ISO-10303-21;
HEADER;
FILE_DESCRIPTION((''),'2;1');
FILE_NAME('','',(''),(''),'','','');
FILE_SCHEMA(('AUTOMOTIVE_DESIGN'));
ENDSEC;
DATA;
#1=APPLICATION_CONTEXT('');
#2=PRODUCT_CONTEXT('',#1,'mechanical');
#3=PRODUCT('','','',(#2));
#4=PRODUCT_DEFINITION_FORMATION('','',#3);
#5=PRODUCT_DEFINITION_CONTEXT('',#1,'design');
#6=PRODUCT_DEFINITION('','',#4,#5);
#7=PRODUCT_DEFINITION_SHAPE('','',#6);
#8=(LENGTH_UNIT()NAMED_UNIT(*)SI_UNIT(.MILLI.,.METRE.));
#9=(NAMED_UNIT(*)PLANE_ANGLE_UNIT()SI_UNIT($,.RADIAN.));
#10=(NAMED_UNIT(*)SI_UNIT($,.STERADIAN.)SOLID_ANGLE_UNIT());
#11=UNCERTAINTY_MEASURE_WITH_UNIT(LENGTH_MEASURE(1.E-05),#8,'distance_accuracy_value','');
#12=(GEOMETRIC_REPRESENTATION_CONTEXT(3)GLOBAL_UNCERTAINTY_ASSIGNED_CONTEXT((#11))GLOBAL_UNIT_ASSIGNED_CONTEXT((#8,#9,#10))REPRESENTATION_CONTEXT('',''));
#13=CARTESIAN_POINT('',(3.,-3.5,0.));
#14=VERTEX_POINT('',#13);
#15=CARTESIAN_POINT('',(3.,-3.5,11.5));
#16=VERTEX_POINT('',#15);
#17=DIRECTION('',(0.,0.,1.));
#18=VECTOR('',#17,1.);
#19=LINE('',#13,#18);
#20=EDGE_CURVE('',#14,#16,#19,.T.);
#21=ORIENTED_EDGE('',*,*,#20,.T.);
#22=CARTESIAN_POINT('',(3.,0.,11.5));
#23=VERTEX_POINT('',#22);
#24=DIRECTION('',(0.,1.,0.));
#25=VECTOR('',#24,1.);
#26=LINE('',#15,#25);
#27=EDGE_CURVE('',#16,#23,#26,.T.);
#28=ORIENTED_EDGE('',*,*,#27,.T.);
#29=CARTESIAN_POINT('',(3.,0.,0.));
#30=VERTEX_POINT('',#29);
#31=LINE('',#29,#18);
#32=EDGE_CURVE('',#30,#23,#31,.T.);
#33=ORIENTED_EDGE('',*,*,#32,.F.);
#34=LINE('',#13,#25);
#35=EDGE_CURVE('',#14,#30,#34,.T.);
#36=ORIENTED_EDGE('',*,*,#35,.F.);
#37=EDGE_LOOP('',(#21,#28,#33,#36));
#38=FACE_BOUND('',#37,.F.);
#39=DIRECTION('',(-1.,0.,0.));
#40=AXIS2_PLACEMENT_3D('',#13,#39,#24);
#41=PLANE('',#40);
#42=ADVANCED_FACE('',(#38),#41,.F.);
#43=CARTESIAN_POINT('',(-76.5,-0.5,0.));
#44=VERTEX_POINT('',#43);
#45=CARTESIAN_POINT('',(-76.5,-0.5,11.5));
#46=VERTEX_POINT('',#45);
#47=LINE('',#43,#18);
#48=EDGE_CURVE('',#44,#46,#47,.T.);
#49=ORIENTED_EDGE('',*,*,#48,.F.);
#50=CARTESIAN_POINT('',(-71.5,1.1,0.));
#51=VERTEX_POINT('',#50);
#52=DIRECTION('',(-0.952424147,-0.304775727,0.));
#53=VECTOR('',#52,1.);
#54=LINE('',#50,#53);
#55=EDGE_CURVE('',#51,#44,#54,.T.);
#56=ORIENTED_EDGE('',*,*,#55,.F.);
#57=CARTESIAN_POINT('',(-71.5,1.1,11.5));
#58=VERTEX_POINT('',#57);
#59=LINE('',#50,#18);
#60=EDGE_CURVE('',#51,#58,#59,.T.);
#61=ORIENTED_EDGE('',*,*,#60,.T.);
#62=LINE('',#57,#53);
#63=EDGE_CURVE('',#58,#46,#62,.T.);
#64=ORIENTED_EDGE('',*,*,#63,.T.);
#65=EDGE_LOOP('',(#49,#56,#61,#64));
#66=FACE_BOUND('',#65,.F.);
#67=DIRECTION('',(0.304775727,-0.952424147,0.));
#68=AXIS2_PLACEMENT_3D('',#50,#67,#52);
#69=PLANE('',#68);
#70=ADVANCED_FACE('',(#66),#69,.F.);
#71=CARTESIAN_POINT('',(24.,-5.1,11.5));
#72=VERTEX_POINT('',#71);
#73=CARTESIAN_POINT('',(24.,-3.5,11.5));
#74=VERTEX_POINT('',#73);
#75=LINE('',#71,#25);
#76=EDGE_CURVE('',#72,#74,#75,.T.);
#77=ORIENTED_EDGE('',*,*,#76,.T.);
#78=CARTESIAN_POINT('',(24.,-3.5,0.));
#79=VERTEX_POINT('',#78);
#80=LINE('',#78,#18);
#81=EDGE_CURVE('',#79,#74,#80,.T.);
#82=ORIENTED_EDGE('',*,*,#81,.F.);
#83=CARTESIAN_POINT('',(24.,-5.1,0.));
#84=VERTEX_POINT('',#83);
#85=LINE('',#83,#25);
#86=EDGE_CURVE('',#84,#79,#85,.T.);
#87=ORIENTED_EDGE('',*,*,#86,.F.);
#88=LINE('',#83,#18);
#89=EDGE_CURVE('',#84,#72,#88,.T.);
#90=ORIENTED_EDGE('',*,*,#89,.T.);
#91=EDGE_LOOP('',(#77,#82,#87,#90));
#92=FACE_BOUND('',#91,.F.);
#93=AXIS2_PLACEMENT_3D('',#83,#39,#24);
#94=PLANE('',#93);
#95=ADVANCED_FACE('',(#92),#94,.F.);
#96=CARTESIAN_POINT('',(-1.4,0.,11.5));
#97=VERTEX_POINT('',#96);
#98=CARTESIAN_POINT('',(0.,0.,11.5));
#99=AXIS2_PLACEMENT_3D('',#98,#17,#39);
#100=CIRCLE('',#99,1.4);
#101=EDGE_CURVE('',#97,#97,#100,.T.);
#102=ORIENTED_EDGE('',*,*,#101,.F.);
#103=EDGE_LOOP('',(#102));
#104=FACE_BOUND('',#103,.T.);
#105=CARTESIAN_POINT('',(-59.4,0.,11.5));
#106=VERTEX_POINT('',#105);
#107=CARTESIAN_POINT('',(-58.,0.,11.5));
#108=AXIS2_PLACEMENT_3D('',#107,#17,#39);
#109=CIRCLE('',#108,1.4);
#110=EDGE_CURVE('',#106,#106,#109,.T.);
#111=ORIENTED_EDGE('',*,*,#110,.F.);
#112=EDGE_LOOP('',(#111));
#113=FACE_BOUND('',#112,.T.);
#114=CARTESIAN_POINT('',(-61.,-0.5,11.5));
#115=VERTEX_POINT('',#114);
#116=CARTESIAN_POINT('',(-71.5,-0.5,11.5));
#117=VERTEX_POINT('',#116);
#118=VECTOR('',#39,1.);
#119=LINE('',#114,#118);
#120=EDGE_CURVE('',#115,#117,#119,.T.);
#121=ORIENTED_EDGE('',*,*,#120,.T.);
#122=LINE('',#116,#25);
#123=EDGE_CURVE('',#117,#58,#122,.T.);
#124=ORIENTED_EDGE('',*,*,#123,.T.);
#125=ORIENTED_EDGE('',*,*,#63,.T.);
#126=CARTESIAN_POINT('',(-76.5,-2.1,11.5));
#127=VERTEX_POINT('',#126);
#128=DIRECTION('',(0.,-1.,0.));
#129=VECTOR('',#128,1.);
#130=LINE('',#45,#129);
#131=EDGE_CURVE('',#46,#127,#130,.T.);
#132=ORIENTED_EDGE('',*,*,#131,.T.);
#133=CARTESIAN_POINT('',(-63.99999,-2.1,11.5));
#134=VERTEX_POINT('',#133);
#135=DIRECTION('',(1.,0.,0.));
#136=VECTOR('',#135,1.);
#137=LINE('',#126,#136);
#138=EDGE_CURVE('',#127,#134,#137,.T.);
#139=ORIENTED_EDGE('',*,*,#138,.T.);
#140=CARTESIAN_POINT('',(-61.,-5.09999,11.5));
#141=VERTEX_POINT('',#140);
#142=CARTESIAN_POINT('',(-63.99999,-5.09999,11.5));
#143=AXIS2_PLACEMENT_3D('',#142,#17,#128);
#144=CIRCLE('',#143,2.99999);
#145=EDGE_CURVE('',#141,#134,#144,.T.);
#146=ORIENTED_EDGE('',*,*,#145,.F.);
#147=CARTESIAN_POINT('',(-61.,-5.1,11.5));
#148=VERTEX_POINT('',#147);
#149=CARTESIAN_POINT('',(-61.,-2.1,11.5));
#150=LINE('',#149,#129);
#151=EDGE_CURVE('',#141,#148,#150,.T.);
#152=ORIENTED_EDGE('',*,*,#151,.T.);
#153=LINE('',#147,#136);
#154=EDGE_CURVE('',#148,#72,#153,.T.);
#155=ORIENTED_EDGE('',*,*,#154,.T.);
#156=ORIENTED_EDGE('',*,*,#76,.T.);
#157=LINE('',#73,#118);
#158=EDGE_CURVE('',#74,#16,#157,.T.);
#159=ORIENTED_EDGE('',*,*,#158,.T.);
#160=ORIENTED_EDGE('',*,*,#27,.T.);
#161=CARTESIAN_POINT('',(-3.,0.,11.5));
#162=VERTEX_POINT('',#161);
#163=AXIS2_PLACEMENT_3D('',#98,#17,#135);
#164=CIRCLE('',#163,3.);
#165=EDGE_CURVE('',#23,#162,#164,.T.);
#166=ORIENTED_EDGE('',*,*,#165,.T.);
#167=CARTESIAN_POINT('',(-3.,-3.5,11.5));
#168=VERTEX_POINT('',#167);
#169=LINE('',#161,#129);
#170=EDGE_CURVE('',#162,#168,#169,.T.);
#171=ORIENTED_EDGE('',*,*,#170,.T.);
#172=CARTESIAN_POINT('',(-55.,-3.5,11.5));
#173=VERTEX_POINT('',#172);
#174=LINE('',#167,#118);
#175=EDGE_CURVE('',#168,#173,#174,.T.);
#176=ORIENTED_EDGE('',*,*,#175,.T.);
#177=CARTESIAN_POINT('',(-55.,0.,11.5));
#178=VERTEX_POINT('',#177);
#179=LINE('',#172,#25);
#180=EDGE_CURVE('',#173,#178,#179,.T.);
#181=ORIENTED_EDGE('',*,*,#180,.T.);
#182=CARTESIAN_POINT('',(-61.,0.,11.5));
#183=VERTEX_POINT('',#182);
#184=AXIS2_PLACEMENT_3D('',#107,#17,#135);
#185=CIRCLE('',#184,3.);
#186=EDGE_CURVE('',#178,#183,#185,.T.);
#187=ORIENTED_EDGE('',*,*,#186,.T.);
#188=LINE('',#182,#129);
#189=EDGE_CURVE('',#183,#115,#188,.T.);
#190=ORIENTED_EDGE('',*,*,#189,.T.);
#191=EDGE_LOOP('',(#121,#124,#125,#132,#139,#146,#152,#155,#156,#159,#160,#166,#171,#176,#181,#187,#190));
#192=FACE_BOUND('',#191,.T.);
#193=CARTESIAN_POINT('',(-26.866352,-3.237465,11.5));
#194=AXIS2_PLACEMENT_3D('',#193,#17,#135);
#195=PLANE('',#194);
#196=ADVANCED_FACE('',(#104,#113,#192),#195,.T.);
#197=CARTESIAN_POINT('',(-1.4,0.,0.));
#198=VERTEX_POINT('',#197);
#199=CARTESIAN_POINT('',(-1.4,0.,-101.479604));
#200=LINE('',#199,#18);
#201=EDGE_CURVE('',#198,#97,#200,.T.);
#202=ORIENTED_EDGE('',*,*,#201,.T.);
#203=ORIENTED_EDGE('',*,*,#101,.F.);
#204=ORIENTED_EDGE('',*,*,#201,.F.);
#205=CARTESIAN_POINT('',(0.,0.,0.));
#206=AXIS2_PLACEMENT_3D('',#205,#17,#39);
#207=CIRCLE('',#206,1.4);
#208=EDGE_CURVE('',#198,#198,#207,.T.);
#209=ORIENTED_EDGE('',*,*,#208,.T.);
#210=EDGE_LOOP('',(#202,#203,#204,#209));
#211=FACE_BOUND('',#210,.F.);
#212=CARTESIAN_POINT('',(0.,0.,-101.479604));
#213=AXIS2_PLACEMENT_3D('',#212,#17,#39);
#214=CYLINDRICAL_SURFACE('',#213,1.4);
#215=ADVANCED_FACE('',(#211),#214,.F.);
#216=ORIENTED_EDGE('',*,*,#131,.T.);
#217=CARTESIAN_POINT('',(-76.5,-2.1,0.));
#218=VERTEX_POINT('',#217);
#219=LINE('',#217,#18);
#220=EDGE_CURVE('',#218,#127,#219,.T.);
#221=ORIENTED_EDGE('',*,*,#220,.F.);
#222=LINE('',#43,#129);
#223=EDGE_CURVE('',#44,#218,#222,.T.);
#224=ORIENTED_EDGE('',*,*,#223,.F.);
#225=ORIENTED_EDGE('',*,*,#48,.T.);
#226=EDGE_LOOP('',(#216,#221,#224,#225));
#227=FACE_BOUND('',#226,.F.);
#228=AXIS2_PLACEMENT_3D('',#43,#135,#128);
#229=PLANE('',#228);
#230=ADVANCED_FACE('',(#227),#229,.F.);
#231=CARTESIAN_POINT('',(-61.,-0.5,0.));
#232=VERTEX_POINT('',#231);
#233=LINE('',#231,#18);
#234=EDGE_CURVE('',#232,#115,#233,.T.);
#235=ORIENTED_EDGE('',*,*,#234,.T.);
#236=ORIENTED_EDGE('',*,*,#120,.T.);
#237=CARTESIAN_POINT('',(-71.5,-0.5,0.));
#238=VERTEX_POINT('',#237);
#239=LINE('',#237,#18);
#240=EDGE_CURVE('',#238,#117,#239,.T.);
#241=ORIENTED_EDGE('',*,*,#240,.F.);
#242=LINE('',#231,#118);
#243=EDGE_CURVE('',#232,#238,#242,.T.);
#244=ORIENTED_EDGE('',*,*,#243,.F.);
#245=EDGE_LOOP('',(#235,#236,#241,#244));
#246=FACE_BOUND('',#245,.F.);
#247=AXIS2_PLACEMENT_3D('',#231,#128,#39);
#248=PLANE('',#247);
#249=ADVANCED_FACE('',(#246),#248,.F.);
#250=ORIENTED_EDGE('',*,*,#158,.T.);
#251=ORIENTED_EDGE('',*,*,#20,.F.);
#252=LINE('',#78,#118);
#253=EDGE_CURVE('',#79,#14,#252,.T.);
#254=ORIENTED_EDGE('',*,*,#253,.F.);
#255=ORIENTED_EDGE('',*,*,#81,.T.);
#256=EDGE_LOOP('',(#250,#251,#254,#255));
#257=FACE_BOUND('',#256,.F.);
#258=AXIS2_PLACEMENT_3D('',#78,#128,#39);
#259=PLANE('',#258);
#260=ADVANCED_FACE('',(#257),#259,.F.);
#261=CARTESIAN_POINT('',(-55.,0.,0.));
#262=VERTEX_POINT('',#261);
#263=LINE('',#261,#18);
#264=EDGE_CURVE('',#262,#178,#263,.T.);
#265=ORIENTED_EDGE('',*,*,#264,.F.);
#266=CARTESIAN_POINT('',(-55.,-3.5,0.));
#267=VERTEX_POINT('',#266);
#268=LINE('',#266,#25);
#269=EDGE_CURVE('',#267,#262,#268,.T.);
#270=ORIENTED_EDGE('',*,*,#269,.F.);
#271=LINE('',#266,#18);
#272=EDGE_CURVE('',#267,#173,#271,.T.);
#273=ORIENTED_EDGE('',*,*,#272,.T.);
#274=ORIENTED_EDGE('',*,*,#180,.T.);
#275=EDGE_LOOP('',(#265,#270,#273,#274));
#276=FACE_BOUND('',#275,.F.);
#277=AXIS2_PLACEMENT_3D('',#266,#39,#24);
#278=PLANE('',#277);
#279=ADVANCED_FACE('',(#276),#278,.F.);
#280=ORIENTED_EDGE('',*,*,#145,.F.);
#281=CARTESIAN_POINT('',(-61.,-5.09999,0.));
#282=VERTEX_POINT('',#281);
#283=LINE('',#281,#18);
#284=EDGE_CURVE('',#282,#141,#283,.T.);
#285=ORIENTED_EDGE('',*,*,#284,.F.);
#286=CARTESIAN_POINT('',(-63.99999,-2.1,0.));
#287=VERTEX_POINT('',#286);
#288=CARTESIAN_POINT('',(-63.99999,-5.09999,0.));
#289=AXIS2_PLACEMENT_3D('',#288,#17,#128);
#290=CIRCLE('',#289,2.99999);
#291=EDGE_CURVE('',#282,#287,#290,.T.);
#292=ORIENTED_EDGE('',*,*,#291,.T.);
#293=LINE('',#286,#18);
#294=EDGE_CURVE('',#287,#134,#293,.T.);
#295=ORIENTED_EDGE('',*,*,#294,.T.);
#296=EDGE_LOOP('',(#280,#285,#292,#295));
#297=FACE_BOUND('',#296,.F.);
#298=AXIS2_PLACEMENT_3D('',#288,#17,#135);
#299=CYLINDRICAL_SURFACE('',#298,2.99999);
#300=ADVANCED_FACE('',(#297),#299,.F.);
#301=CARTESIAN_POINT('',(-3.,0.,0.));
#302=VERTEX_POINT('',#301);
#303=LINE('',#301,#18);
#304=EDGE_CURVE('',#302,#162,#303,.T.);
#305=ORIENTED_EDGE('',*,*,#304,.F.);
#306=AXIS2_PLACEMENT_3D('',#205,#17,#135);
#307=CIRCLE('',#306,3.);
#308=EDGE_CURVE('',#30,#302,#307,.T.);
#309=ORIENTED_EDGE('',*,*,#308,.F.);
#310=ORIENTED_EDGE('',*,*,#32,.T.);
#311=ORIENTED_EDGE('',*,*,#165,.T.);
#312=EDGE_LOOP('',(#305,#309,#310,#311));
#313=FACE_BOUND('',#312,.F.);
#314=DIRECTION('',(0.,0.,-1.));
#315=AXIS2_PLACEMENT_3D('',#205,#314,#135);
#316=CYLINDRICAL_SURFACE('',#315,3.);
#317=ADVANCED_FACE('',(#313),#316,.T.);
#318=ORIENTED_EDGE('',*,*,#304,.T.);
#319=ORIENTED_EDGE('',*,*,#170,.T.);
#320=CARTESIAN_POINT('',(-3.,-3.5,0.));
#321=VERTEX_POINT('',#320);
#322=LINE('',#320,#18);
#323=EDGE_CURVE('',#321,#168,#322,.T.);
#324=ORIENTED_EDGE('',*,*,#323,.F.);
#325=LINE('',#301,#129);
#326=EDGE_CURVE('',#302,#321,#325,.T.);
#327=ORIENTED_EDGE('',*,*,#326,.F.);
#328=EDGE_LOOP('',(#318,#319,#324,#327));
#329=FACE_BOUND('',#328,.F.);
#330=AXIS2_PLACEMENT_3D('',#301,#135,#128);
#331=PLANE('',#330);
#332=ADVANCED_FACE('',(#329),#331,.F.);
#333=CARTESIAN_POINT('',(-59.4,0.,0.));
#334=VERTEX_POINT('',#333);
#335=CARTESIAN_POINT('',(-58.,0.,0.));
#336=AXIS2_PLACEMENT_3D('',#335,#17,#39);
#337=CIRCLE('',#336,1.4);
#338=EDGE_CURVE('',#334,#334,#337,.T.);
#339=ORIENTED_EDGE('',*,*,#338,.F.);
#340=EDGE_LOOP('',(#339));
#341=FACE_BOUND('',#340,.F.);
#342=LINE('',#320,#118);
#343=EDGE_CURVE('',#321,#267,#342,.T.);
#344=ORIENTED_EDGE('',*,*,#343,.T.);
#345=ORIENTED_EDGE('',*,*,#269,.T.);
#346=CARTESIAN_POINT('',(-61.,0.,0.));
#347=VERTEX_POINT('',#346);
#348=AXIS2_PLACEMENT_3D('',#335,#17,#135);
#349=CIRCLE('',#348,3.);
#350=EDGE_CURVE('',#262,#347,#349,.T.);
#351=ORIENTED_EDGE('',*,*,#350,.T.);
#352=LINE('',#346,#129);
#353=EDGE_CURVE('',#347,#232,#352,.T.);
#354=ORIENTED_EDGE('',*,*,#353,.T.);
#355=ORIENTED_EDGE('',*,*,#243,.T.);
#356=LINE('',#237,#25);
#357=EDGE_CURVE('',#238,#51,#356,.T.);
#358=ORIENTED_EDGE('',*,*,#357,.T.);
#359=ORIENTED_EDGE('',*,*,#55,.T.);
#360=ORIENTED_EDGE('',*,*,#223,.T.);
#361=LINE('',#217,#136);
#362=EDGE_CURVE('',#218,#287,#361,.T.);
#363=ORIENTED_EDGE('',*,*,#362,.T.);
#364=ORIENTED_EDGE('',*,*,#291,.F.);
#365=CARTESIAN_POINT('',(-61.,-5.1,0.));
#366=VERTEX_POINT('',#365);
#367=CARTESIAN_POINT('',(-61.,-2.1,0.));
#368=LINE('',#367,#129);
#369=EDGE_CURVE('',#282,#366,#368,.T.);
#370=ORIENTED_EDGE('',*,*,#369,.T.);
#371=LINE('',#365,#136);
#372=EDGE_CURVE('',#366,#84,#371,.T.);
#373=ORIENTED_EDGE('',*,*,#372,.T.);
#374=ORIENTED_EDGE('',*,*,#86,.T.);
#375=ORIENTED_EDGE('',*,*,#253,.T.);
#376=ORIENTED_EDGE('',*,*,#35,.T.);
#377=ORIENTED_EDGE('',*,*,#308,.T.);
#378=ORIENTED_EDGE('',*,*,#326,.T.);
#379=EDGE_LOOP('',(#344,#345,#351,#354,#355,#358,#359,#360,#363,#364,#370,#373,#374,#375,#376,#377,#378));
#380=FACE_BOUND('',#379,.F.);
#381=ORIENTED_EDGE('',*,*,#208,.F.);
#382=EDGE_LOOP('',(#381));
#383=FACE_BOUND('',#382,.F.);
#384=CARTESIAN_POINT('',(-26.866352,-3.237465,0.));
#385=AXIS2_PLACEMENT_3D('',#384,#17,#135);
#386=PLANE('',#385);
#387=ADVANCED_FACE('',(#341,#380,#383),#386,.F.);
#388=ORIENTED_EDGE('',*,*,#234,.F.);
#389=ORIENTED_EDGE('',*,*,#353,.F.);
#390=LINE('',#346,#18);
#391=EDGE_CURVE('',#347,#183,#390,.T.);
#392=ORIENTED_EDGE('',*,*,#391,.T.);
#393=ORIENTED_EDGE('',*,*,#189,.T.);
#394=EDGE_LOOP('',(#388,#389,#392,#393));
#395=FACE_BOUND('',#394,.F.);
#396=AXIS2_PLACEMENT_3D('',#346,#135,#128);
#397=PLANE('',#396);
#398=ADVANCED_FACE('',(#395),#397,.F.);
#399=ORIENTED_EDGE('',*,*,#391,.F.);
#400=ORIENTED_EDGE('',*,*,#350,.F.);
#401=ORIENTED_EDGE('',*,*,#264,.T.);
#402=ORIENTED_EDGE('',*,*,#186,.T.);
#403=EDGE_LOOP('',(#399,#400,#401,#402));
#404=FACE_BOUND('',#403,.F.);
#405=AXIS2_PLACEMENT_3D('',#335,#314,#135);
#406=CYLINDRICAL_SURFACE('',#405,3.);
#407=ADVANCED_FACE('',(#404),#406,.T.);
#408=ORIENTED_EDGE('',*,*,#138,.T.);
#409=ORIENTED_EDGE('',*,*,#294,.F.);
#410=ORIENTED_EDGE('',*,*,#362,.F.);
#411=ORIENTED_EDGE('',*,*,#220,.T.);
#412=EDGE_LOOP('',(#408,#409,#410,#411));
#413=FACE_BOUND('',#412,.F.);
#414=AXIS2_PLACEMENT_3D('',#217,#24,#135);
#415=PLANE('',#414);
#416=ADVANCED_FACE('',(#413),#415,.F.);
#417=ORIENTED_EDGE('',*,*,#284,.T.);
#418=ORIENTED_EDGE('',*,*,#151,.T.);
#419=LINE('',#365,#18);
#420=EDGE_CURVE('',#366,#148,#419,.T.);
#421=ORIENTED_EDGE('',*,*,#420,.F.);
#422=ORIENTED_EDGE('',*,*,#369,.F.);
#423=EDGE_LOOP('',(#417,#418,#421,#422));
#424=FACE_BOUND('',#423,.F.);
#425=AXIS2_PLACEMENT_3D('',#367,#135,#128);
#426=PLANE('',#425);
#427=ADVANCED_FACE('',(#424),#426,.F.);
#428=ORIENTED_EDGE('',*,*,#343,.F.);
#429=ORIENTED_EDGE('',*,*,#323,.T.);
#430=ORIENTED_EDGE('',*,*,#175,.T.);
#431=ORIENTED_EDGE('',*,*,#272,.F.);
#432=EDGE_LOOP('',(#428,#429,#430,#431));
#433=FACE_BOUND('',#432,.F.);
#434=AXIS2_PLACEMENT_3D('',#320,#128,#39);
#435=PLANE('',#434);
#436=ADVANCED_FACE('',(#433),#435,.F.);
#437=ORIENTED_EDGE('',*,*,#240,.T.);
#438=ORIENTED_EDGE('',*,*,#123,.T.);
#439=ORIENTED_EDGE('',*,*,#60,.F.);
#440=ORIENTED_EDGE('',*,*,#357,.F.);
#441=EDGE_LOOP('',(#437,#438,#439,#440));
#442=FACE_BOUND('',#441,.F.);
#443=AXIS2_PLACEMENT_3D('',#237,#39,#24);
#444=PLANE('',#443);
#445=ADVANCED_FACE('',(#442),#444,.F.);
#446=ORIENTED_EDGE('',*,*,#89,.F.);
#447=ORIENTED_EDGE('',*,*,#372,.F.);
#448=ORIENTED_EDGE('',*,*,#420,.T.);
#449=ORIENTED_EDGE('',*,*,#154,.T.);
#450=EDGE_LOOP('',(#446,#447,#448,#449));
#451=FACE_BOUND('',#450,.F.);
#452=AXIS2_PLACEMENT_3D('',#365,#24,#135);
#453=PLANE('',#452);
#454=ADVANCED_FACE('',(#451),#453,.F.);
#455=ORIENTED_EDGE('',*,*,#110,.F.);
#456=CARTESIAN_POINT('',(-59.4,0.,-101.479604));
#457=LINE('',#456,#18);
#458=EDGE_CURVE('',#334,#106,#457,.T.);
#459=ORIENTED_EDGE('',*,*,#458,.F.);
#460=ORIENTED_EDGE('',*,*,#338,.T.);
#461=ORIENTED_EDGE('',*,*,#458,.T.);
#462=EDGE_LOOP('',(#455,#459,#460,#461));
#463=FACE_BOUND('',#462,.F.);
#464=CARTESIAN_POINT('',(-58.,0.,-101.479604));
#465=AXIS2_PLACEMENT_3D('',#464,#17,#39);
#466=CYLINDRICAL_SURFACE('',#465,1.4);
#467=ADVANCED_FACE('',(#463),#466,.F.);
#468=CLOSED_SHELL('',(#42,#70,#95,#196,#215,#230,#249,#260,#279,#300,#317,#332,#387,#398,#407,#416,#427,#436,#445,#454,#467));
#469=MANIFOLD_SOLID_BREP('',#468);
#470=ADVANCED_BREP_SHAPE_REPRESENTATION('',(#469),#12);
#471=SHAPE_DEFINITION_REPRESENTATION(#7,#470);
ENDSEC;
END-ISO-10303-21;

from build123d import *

# Parameters (mm, degrees)
F1_DEPTH = 11.5
F2_D     = 2.8
F3_R     = 2.99999


# Not quite as in the source:
# - a fillet or chamfer is up to 0.001 mm smaller than in the source, because OpenCascade refuses the exact size


with BuildPart() as f1:
    # F0 (on Top) → F1 (new body)
    with BuildSketch(Plane.XY):
        with BuildLine():
            Line((-61, -5.1), (24, -5.1))
            Line((24, -5.1), (24, -3.5))
            Line((24, -3.5), (3, -3.5))
            Line((3, -3.5), (3, 0))
            ThreePointArc((3, 0), (0, 3), (-3, 0))
            Line((-3, 0), (-3, -3.5))
            Line((-3, -3.5), (-55, -3.5))
            Line((-55, -3.5), (-55, 0))
            ThreePointArc((-55, 0), (-58, 3), (-61, 0))
            Line((-61, 0), (-61, -0.5))
            Line((-61, -0.5), (-71.5, -0.5))
            Line((-71.5, -0.5), (-71.5, 1.1))
            Line((-71.5, 1.1), (-76.5, -0.5))
            Line((-76.5, -0.5), (-76.5, -2.1))
            Line((-76.5, -2.1), (-61, -2.1))
            Line((-61, -2.1), (-61, -5.1))
        make_face()
    extrude(amount=F1_DEPTH)

    # F2 (through all)
    with Locations(Plane(origin=(0, 0, 0), x_dir=(1, 0, 0), z_dir=(0, 0, -1))):
        with Locations((-58, 0), (0, 0)):
            Hole(F2_D / 2)

    # F3 (radius 3 in the source; OpenCascade refuses exactly that, so slightly less here)
    f3_edges = [f1.edges().sort_by_distance(p)[0] for p in [
        (-61, -2.1, 5.75),
    ]]
    fillet(f3_edges, radius=F3_R)


solid = f1.part
